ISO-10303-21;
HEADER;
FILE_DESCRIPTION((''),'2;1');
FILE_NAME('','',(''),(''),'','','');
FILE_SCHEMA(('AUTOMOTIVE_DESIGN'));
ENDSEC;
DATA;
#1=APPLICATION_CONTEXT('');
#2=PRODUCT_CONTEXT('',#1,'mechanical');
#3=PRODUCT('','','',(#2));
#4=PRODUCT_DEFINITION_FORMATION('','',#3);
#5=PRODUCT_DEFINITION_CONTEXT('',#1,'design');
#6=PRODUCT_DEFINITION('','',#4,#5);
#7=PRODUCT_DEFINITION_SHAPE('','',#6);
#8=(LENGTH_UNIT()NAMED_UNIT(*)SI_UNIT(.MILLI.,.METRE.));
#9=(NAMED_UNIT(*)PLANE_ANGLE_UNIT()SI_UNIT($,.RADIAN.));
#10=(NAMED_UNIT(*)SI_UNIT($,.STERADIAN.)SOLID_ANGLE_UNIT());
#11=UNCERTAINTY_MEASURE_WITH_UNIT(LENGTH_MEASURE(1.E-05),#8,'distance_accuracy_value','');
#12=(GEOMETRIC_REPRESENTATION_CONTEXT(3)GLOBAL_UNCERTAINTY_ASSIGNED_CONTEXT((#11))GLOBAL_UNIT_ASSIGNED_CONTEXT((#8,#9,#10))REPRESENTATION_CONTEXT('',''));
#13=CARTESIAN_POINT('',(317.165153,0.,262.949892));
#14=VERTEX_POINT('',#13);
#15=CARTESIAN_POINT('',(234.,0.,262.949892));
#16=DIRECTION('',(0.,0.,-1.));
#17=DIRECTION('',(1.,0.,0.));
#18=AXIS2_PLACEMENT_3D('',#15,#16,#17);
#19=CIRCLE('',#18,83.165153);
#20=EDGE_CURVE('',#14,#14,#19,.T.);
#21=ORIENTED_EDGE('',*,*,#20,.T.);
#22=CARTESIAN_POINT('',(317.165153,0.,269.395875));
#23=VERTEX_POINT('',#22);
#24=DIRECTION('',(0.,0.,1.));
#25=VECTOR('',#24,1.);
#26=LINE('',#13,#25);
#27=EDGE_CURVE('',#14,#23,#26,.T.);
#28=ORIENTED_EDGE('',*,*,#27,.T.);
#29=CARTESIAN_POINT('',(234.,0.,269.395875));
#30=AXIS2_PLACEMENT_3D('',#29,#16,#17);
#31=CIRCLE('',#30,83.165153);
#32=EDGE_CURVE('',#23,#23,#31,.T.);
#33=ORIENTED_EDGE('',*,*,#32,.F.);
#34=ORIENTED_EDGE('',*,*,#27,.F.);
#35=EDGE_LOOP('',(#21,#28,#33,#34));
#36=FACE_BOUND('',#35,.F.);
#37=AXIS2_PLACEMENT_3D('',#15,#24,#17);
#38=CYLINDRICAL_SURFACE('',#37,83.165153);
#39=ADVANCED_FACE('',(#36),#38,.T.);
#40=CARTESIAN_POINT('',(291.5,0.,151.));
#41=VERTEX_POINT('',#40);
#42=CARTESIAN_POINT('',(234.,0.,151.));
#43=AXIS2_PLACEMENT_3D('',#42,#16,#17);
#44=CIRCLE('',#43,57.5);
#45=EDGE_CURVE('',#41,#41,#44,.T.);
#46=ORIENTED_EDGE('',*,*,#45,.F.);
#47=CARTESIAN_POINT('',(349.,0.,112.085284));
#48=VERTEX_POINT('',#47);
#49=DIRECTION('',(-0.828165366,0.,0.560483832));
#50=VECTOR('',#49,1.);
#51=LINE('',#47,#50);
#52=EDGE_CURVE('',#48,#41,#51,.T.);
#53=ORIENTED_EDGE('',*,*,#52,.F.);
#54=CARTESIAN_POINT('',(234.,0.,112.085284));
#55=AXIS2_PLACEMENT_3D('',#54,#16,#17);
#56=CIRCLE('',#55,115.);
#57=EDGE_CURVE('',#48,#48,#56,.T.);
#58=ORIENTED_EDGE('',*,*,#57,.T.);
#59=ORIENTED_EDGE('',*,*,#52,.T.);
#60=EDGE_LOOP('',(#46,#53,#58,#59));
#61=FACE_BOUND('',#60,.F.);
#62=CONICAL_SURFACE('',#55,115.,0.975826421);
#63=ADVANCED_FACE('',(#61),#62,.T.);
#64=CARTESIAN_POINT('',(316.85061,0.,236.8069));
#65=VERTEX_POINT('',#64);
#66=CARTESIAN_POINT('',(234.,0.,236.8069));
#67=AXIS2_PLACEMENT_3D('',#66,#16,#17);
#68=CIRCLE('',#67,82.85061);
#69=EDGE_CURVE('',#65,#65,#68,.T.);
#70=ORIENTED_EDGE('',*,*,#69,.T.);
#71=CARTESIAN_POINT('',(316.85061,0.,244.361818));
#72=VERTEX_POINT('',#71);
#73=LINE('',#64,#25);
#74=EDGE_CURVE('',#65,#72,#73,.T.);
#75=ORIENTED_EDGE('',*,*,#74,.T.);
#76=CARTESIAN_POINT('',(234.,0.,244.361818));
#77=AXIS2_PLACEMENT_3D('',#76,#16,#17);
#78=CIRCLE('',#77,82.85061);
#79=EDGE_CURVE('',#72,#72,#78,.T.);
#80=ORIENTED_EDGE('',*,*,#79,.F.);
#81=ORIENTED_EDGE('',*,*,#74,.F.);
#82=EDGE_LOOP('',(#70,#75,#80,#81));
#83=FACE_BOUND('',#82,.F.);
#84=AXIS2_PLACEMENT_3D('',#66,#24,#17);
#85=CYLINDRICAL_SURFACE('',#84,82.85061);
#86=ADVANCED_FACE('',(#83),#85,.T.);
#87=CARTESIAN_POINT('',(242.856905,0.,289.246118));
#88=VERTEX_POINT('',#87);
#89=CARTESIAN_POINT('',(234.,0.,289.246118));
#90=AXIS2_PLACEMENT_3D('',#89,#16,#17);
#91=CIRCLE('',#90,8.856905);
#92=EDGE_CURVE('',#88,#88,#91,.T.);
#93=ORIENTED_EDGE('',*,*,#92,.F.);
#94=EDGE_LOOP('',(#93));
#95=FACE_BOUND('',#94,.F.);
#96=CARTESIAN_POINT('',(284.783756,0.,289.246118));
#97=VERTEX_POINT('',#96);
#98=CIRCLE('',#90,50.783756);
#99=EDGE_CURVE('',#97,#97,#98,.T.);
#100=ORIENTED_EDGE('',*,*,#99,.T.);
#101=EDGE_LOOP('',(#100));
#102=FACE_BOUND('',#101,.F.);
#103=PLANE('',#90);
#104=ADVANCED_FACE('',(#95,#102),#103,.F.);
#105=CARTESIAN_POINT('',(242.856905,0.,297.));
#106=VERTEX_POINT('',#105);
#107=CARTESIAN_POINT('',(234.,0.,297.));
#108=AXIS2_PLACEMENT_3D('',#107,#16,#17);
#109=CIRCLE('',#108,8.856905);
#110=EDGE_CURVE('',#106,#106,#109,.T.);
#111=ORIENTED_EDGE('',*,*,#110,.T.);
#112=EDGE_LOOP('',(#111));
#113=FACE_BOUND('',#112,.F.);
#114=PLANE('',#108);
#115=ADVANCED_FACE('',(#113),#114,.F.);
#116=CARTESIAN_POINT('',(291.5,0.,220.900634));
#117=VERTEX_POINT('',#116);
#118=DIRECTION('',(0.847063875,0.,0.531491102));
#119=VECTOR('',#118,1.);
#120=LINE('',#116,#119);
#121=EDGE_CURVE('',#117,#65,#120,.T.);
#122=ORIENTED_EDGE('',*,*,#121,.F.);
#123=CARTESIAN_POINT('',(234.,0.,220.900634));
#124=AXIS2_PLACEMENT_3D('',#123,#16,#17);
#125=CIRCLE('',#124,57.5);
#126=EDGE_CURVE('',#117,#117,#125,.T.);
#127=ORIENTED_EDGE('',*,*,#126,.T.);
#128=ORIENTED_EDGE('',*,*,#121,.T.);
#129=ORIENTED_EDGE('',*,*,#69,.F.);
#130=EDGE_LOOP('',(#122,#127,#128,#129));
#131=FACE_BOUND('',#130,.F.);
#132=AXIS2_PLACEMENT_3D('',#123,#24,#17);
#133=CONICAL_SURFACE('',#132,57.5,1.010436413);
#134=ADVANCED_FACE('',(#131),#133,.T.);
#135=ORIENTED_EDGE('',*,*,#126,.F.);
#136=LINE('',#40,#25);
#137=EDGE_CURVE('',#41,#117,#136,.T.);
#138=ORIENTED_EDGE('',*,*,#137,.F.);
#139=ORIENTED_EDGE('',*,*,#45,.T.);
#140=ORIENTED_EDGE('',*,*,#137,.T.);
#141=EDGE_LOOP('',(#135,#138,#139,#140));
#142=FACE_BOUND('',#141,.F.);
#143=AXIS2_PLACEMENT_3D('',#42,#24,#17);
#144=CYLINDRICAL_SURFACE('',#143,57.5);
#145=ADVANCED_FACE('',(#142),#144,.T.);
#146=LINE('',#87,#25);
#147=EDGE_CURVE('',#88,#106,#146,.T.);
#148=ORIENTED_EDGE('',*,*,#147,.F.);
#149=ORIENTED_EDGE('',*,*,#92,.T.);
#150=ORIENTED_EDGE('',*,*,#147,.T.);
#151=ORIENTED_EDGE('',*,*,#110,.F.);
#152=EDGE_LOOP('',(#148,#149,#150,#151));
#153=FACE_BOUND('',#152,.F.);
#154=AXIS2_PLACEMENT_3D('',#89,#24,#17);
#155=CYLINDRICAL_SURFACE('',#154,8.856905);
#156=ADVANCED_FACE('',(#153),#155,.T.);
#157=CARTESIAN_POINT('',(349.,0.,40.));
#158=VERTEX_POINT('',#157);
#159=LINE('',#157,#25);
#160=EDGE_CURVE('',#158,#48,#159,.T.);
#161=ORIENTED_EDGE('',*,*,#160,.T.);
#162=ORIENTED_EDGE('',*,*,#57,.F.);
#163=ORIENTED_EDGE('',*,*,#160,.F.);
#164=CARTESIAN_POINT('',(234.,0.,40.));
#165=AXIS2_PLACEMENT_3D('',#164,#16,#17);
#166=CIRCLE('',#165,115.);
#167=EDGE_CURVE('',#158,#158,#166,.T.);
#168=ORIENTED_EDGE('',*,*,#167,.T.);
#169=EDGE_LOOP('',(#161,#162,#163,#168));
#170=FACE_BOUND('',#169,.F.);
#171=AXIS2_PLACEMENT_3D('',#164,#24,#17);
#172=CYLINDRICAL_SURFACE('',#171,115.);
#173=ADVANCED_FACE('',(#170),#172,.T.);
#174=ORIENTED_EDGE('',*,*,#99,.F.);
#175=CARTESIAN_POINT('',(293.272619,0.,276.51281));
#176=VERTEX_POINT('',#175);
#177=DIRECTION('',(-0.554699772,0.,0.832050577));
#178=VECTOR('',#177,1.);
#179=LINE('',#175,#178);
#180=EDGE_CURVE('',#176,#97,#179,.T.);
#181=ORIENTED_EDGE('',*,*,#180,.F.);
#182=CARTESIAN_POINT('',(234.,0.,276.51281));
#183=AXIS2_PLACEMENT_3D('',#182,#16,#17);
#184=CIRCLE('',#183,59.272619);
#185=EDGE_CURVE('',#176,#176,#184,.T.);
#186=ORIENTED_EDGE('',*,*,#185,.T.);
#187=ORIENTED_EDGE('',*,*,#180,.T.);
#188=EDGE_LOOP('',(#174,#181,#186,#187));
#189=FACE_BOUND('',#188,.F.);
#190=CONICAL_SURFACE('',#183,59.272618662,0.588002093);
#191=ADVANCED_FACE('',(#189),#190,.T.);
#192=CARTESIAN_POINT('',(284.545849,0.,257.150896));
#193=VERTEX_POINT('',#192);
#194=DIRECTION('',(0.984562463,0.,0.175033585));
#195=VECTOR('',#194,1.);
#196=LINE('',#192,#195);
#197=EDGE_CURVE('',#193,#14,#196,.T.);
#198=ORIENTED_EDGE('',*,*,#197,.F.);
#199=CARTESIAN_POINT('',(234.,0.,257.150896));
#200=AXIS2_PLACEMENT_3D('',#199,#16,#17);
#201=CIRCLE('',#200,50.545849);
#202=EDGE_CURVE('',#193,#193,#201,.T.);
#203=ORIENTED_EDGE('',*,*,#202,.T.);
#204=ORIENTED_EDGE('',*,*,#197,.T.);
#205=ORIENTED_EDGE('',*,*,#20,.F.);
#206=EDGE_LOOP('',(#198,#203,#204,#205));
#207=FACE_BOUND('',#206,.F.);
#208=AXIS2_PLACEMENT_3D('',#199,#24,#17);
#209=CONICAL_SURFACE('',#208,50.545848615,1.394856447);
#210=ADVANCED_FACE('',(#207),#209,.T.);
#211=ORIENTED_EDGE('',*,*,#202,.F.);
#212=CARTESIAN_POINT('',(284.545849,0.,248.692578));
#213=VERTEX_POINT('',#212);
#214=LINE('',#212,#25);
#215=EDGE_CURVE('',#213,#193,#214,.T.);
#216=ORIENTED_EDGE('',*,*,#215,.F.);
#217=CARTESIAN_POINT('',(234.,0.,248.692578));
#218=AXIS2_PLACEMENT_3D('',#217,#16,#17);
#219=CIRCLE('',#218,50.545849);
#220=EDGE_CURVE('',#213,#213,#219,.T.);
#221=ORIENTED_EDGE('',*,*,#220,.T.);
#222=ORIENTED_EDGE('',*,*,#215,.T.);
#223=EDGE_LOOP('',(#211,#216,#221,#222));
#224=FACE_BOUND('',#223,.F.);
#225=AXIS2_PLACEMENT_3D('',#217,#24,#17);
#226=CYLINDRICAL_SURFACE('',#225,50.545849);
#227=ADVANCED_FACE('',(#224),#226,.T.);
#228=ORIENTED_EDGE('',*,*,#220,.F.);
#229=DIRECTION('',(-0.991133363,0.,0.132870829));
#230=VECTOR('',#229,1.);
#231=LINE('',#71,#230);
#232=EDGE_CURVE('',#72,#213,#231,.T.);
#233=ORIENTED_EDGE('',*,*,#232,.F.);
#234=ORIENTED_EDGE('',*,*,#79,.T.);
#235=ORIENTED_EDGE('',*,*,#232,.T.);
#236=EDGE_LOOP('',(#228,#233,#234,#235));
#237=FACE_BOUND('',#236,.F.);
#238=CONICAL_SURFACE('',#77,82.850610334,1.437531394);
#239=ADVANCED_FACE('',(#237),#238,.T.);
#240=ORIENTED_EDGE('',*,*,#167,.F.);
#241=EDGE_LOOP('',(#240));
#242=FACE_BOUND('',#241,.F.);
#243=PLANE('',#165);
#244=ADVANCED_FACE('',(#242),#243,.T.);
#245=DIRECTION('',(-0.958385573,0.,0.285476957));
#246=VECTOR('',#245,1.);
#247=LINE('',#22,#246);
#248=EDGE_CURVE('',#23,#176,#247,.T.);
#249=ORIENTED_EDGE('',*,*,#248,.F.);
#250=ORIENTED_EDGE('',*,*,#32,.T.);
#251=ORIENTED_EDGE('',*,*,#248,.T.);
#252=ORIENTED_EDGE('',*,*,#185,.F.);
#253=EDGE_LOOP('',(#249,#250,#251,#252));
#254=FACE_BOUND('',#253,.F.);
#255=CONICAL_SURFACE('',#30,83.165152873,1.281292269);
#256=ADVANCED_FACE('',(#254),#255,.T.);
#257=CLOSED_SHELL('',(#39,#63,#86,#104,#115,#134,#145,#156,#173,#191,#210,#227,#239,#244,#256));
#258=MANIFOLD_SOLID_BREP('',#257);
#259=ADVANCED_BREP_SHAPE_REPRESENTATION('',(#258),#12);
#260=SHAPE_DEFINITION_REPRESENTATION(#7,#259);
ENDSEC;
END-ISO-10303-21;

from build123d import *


# Not quite as in the source:
# - the program builds the solid bodies; features that only make, move or delete a surface that nothing else refers to are left out


with BuildPart() as f1:
    # F0 (on Front) → F1 (revolve)
    with BuildSketch(Plane.XZ):
        Polygon((242.856904766, 297), (234, 297), (234, 40), (349, 40), (349, 112.0852836363), (291.5, 151), (291.5, 220.900633561), (316.8506103335, 236.8069001733), (316.8506103335, 244.3618179582), (284.5458486148, 248.6925777132), (284.5458486148, 257.150895566), (317.1651528727, 262.9498915393), (317.1651528727, 269.3958750746), (293.2726186624, 276.5128102049), (284.7837560136, 289.2461182581), (242.856904766, 289.2461182581), align=None)
    revolve(axis=Axis((234, 0, 171.6133333333), (0, 0, -1)))


solid = f1.part
